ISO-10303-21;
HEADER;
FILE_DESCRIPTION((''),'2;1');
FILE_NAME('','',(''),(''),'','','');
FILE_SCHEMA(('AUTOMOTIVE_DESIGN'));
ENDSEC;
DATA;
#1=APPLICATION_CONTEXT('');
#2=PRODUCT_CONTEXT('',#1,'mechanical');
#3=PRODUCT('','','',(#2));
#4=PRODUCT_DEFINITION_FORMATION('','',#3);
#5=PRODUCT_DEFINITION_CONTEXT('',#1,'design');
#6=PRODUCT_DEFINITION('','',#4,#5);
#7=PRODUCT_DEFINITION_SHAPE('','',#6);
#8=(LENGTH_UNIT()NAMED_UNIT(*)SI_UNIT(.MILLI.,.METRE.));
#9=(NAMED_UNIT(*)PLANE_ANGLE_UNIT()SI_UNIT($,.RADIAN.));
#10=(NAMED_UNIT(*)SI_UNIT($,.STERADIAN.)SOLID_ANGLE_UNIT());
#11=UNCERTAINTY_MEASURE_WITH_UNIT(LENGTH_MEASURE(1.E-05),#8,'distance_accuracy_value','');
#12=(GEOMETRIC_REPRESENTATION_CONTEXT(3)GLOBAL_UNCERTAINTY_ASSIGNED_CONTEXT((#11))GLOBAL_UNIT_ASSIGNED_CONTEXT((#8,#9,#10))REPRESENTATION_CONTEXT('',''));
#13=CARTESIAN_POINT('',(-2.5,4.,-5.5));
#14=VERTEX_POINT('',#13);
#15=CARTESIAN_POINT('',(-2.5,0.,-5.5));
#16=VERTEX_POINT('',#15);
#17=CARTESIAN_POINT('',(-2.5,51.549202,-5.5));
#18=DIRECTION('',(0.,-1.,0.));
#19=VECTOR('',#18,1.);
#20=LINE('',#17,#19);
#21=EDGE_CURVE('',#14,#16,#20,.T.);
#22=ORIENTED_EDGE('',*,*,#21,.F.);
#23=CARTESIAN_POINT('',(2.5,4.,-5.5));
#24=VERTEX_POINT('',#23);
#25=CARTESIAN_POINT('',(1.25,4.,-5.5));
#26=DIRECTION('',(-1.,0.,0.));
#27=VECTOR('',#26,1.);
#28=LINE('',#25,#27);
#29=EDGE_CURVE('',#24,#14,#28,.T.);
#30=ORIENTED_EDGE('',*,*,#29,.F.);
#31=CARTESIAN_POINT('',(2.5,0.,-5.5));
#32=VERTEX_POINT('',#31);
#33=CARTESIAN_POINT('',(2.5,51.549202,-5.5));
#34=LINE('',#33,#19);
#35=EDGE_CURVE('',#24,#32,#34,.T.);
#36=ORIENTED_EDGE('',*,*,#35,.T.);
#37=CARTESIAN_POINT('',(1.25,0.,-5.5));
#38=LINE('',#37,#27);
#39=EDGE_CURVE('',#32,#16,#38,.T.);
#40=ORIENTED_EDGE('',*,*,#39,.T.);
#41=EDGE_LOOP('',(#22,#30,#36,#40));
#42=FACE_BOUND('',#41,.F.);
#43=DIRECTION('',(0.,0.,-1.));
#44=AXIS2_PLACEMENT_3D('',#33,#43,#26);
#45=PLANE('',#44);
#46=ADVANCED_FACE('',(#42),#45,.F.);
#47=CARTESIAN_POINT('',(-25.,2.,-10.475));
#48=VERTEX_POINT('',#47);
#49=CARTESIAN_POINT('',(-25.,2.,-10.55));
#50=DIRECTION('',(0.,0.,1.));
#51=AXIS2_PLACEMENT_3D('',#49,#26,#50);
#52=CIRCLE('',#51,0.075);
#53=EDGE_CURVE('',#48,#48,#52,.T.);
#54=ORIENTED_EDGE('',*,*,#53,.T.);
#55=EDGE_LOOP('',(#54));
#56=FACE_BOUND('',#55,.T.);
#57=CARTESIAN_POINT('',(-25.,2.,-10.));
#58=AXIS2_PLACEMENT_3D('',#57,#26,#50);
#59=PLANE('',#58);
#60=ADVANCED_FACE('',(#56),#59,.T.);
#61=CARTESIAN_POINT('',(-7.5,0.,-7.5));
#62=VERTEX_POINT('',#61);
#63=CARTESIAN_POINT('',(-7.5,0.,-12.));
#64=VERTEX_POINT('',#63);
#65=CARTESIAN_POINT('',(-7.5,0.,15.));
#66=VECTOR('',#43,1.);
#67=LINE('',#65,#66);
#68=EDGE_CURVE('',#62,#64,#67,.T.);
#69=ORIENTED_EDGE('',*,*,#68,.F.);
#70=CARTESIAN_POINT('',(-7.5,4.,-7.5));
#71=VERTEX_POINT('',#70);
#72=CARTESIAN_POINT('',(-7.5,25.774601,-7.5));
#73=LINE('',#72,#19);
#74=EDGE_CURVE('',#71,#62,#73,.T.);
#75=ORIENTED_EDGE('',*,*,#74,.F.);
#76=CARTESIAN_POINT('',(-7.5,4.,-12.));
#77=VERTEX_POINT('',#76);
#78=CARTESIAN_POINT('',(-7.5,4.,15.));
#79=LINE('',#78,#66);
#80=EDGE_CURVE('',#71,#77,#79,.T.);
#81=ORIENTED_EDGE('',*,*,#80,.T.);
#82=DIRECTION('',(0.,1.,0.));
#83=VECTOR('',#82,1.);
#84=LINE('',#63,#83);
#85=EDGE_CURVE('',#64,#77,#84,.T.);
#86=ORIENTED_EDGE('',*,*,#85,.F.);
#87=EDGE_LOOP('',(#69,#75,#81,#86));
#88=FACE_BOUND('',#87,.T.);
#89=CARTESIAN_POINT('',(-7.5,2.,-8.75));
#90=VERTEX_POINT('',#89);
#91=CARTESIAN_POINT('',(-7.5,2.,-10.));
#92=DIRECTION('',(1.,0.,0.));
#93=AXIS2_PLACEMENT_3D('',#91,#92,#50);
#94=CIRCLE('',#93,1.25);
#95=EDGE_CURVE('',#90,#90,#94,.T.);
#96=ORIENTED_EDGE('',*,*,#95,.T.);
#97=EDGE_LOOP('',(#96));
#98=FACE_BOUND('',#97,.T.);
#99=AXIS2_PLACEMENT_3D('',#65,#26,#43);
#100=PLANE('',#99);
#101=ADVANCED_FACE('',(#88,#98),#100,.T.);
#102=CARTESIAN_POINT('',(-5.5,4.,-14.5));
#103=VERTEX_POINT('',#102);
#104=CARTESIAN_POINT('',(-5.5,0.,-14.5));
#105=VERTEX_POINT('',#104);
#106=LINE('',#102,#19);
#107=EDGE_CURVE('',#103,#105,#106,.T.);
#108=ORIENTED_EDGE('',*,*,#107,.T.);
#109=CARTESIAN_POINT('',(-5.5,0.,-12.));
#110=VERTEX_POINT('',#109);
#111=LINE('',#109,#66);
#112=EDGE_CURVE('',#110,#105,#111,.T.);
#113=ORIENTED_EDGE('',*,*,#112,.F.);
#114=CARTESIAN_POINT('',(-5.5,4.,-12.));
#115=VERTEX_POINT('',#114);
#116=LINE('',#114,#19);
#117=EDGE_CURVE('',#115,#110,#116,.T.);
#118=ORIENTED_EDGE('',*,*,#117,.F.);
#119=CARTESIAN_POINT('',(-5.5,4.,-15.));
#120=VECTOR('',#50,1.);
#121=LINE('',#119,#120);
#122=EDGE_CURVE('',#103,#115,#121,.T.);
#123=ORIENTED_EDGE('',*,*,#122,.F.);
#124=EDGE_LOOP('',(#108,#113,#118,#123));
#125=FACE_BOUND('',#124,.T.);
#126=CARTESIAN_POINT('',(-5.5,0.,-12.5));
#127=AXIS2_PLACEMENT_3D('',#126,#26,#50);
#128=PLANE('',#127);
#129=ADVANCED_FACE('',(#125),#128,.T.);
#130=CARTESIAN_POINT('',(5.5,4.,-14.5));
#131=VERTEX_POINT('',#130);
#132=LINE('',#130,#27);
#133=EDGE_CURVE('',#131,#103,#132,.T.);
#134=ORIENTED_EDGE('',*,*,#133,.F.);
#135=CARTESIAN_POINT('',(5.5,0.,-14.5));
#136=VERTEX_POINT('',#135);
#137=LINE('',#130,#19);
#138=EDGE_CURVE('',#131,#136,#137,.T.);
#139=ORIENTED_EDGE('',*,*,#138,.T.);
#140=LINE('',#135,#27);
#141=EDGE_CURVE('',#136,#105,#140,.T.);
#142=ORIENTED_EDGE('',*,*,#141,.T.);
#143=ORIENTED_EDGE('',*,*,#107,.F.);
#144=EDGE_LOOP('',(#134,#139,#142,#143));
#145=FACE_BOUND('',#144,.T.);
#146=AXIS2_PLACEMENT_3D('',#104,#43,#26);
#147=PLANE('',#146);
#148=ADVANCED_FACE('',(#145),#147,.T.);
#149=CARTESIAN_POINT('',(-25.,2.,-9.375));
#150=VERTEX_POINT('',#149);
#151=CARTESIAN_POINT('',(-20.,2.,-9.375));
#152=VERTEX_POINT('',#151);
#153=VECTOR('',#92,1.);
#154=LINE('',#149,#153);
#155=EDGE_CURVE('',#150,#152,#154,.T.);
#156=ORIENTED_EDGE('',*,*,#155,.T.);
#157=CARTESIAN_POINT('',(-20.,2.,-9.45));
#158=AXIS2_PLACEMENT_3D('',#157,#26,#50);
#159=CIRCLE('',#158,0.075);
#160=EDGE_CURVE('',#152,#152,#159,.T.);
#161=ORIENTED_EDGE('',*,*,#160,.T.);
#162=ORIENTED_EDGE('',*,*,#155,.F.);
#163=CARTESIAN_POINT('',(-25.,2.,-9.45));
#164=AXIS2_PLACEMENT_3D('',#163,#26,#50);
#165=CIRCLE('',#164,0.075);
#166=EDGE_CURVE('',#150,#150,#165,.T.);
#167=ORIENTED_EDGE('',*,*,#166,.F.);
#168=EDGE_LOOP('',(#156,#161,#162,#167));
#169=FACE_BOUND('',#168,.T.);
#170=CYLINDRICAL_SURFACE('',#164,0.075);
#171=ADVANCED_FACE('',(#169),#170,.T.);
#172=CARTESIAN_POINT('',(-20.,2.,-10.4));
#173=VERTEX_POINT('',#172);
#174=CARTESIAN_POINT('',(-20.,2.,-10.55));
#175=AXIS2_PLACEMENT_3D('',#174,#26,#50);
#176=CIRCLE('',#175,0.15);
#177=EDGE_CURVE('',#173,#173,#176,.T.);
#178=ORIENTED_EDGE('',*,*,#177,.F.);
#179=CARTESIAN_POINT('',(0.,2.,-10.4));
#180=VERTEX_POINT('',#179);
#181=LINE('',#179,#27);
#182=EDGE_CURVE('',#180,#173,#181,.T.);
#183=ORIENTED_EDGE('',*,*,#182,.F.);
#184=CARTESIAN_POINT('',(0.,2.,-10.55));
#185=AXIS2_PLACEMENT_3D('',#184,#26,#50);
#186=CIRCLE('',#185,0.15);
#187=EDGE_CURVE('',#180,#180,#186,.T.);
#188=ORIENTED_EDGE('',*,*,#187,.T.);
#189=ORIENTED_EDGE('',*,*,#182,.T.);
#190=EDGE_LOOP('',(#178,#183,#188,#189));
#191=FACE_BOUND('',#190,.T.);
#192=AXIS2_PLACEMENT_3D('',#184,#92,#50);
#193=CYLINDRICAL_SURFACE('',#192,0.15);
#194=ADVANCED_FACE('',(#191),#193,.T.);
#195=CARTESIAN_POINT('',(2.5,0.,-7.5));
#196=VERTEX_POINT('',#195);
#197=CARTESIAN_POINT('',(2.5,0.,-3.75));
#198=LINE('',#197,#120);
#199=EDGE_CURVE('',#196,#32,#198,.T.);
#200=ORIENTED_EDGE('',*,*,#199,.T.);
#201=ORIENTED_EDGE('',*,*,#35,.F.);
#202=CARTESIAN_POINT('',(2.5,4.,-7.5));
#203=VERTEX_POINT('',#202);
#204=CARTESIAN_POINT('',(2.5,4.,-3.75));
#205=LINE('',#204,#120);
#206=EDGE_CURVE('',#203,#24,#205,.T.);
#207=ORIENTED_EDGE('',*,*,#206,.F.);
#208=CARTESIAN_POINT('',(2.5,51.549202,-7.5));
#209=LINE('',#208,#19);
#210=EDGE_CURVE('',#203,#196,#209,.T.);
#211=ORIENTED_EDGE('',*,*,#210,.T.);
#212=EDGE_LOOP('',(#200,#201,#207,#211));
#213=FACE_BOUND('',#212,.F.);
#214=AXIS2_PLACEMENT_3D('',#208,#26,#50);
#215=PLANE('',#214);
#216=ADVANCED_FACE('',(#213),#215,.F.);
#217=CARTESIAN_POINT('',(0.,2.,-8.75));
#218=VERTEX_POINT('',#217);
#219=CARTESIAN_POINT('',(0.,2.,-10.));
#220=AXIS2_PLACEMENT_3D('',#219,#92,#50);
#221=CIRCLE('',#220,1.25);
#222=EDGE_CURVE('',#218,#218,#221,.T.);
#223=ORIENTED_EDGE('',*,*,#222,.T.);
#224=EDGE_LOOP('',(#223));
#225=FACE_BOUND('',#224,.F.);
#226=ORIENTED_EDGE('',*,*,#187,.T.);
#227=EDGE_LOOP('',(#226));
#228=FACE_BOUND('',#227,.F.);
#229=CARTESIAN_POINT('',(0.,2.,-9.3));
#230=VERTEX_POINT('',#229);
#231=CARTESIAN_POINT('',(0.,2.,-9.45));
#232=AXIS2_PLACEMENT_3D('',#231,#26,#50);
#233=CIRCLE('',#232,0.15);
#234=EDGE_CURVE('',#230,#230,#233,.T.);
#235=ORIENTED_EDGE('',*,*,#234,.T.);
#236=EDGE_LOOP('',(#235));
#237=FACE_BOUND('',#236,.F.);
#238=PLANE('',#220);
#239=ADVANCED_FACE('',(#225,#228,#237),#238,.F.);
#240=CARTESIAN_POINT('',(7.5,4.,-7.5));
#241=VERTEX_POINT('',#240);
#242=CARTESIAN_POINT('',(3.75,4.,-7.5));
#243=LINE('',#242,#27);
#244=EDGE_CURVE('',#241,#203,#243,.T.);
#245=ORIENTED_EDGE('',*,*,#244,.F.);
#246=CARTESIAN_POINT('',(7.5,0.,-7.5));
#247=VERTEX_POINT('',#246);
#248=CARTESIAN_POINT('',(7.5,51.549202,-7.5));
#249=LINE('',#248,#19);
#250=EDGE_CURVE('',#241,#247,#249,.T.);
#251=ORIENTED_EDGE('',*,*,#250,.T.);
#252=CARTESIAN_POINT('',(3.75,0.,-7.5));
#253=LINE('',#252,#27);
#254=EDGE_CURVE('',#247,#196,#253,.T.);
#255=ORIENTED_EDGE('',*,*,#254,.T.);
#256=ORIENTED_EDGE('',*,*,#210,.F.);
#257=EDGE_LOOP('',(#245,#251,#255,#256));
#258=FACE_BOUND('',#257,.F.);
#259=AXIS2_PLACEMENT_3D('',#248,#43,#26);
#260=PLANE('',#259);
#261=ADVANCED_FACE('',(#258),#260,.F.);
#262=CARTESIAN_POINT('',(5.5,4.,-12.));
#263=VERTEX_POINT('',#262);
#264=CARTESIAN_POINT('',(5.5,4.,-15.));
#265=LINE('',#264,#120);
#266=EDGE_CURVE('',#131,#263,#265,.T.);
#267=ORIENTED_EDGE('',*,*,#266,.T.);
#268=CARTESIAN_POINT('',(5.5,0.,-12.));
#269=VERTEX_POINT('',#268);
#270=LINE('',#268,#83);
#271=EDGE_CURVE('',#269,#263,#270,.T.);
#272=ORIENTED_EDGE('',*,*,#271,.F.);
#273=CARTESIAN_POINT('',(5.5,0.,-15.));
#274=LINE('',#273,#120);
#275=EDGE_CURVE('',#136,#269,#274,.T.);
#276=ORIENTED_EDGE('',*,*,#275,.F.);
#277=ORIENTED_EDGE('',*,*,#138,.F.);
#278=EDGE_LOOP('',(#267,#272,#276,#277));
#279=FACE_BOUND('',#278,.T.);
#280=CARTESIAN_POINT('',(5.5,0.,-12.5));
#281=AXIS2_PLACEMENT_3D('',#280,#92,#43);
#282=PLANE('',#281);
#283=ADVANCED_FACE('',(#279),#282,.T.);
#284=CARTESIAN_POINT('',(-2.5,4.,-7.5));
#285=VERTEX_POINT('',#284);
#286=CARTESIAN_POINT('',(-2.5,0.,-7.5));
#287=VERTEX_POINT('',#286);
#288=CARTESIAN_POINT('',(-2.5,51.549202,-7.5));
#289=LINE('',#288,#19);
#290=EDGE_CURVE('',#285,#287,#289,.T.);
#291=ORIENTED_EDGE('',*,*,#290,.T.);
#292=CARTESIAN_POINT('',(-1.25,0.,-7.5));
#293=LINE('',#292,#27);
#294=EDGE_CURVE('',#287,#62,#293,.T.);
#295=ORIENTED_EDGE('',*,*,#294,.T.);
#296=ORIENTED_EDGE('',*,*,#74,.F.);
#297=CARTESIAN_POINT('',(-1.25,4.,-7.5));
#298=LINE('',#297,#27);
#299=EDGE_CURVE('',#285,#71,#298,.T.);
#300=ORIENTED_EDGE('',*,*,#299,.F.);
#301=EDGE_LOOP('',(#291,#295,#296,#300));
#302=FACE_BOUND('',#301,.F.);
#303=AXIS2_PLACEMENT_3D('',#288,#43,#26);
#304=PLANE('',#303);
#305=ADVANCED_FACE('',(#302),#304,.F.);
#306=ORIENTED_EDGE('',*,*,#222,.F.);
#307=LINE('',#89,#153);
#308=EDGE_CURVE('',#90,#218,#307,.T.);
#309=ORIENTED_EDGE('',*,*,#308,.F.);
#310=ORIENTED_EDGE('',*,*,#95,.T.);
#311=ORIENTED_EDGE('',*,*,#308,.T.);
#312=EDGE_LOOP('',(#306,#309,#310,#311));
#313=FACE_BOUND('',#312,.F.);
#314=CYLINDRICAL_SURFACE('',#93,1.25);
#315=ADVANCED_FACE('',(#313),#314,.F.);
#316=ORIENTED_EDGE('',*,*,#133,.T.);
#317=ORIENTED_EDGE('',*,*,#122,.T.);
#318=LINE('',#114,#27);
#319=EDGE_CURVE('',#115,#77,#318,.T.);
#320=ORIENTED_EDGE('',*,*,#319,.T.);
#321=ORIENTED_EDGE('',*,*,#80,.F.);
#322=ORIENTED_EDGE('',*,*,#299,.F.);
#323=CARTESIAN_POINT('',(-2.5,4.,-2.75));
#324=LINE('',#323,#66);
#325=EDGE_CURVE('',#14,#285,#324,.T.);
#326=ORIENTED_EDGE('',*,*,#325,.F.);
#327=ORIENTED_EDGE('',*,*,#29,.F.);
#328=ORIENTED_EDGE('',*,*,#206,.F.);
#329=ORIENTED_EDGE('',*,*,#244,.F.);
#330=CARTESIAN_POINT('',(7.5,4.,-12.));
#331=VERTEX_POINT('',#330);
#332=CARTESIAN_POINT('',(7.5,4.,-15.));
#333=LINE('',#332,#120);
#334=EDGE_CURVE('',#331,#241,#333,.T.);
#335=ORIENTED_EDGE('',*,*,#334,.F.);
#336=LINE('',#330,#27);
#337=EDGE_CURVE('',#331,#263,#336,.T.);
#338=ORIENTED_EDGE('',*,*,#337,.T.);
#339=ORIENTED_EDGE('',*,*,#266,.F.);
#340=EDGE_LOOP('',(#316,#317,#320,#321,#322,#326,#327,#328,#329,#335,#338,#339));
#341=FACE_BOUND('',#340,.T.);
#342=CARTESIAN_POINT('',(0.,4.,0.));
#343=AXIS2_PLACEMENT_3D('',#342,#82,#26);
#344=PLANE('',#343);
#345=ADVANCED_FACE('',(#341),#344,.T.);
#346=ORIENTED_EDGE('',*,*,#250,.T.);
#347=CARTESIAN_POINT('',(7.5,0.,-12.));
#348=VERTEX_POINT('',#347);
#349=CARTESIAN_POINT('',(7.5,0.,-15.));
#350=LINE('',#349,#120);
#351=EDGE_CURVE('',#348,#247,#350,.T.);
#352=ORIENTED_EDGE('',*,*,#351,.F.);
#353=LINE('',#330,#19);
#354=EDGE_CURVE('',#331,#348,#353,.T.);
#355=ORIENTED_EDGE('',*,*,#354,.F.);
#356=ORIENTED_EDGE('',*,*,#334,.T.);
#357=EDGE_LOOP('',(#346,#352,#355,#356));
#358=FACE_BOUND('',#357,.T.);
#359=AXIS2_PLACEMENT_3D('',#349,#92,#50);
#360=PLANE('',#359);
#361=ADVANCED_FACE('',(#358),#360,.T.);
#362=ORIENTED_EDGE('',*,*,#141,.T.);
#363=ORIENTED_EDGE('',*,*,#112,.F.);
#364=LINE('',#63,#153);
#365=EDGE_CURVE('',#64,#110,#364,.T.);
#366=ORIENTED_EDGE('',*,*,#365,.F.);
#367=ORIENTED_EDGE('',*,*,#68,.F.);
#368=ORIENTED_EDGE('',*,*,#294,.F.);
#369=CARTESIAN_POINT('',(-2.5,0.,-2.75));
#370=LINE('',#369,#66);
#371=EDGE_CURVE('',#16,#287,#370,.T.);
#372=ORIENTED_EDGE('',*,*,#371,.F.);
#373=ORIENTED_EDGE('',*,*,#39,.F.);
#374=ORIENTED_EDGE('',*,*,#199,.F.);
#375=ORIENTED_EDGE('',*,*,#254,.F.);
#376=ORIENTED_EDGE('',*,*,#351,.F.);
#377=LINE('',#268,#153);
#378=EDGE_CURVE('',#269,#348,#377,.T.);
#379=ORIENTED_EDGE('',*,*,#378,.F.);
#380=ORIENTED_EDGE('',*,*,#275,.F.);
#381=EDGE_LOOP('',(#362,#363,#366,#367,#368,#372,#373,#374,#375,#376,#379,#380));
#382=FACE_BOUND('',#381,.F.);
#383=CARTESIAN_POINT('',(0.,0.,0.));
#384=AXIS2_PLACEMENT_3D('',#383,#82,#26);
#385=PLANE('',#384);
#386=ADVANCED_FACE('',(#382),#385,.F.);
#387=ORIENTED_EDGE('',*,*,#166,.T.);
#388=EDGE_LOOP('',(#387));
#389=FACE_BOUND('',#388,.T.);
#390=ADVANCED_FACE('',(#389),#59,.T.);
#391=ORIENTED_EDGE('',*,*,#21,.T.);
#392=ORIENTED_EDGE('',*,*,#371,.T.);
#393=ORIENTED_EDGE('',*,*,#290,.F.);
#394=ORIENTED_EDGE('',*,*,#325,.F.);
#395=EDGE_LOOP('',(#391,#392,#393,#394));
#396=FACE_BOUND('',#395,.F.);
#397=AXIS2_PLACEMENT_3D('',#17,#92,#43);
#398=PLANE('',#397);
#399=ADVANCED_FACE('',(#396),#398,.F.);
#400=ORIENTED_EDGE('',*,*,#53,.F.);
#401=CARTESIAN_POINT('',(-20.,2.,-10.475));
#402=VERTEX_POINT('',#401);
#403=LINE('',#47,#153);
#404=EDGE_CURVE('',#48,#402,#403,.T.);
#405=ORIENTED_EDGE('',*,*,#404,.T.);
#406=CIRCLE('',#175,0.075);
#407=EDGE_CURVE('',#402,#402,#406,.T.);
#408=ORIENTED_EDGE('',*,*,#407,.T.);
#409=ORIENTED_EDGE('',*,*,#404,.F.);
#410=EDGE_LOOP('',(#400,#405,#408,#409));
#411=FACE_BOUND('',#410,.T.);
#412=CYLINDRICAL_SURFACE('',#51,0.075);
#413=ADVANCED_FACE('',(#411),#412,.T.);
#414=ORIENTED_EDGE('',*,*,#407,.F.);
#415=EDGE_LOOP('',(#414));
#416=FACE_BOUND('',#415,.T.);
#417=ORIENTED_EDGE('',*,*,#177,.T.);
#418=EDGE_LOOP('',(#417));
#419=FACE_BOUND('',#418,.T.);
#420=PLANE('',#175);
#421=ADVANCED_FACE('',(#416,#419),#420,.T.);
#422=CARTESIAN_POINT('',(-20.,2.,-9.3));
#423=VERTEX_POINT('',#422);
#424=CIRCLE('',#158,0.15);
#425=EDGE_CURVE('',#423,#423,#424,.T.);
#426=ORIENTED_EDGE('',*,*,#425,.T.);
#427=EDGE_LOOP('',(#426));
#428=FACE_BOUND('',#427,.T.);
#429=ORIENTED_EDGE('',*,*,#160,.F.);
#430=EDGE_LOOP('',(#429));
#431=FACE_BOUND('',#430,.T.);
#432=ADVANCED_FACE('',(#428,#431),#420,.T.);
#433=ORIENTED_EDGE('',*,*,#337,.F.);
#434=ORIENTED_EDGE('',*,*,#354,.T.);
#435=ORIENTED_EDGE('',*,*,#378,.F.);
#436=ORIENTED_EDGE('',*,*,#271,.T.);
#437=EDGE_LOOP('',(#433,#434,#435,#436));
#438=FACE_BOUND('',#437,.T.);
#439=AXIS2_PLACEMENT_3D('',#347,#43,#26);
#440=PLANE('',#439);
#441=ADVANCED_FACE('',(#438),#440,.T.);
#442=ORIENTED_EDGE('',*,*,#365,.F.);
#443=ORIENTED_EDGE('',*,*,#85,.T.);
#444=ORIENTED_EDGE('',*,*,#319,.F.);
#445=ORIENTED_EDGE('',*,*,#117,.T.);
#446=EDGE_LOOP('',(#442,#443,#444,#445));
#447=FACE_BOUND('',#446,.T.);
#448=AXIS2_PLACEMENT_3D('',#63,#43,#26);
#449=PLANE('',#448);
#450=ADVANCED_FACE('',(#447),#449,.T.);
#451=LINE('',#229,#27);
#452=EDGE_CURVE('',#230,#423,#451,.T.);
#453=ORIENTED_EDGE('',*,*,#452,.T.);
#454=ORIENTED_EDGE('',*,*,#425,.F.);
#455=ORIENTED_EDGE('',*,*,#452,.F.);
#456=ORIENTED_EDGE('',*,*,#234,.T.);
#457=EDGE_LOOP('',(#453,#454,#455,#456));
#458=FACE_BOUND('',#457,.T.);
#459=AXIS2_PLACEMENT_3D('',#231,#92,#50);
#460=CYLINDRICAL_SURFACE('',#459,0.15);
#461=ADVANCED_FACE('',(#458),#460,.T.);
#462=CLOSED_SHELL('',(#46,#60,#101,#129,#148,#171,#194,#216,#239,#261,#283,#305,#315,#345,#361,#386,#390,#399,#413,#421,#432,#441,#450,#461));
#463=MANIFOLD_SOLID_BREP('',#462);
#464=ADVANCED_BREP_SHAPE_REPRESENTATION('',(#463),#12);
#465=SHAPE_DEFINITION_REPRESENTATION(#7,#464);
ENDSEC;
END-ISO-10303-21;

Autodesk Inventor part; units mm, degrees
ref_plane "YZ Plane" through (0, 0, 0) normal (1, 0, 0) x (0, 1, 0)
ref_plane "XZ Plane" through (0, 0, 0) normal (0, 1, 0) x (-1, 0, 0)
ref_plane "XY Plane" through (0, 0, 0) normal (0, 0, 1) x (1, 0, 0)
sketch "Sketch1" plane through (0, 0, 0) normal (0, 1, 0) x (-1, 0, 0)
  line L0 (-7.5, 15) -> (7.5, 15)
  line L1 (7.5, 15) -> (7.5, -15)
  line L2 (7.5, -15) -> (-7.5, -15)
  line L3 (-7.5, -15) -> (-7.5, 15)
  line L4 (-7.5, 15) -> (7.5, -15) construction
  line L5 (7.5, 15) -> (-7.5, -15) construction
  point P0 (0, 0)
  dimension "d0" = 15
  dimension "d1" = 30
extrude "Extrusion1" add sketch "Sketch1" along normal blind 4
chamfer "Chamfer1" distance 2.5 distance2 1 1 edges at (7.5, 2, -15) measured on face at (7.5, 1.3333, 5)
chamfer "Chamfer2" distance 1 distance2 2.5 1 edges at (-7.5, 2, -15) measured on face at (1.8333, 2.6667, -15)
sketch "Sketch3" plane through (0, 0, 0) normal (0, -1, 0) x (1, 0, 0)
  line L0 (0, 0) -> (4, 0)
  line L1 (0, 0) -> (-4, 0)
  dimension "d14" = 4
  dimension "d15" = 4
hole "Hole1" at (4, 0, 0) at (-4, 0, 0) direction (0, 1, 0) diameter 2.1565 end through all thread size "4-40 UNC" class "2B" standard "ANSI Unified Screw Threads"
sketch "Sketch4" plane through (0, 0, 0) normal (0, -1, 0) x (1, 0, 0)
  line L0 (7.5, 15) -> (7.5, -12.5) projected
  line L1 (7.5, -12.5) -> (7.5, -7.5)
  line L2 (7.5, -7.5) -> (2.5, -7.5)
  line L3 (2.5, -7.5) -> (2.5, -5.5)
  line L4 (2.5, -5.5) -> (-2.5, -5.5)
  line L5 (-2.5, -5.5) -> (-2.5, -7.5)
  line L6 (-2.5, -7.5) -> (-7.5679, -7.5)
  line L7 (-7.5679, -7.5) -> (-7.5679, -12.5)
  line L8 (6.5, -15) -> (-6.5, -15) projected
  line L9 (-7.5679, -12.5) -> (-6.5, -15)
  line L10 (7.5, -12.5) -> (6.5, -15) projected
  line L11 (-6.5, -15) -> (6.5, -15)
  line L12 (6.5, -15) -> (7.5, -12.5)
  point P0 (0, 0)
  dimension "d23" = 5
  dimension "d24" = 5
  dimension "d25" = 2
  dimension "d26" = 5
split body "Split1" sketch "Sketch4" result one side removed curves L2 L3 L4 L5 L6 L7 L9 L11 L12 L1 removed pieces at (1.1663, 0.5, 10.3182)
sketch "Sketch5" plane through (-7.5, 0, -12.5) normal (-1, 0, 0) x (0, 0, 1)
  line L0 (0, 0) -> (0, 4) projected
  line L1 (-2.5, 4) -> (-2.5, 0) projected
  line L2 (0, 0) -> (-2.5, 0)
  line L3 (-2.5, 0) -> (-2.5, 4)
  line L4 (-2.5, 4) -> (0, 4)
  line L5 (0, 4) -> (0, 0)
  point P0 (12.5, 0)
extrude "Extrusion3" cut sketch "Sketch5" against normal blind 2
sketch "Sketch6" plane through (7.5, 0, -12.5) normal (1, 0, 0) x (0, 0, -1)
  line L0 (0, 4) -> (0, 0) projected
  line L1 (2.5, 0) -> (2.5, 4) projected
  line L2 (0, 4) -> (2.5, 4)
  line L3 (2.5, 4) -> (2.5, 0)
  line L4 (2.5, 0) -> (0, 0)
  line L5 (0, 0) -> (0, 4)
  point P0 (-12.5, 0)
extrude "Extrusion4" cut sketch "Sketch6" against normal blind 2
hole "Hole2" at (-7.5, 2, -10) direction (1, 0, 0) diameter 2.5 depth 7.5
sketch "Sketch7" plane through (-7.5, 0, -12.5) normal (0, 0, -1) x (-1, 0, 0)
  line L0 (0, 0) -> (0, 4) projected
  line L1 (-2, 4) -> (0, 4) projected
  line L2 (-2, 4) -> (-2, 0) projected
  line L3 (0, 0) -> (-2, 0) projected
  point P0 (-7.5, 0)
extrude "Extrusion5" cut sketch "Sketch7" against normal blind 0.5
sketch "Sketch8" plane through (7.5, 0, -12.5) normal (0, 0, -1) x (-1, 0, 0)
  line L0 (2, 0) -> (0, 0) projected
  line L1 (0, 4) -> (0, 0) projected
  line L2 (2, 0) -> (0, 0) projected
  line L3 (2, 0) -> (2, 4) projected
  line L4 (0, 4) -> (2, 4) projected
  point P0 (7.5, 0)
extrude "Extrusion6" cut sketch "Sketch8" against normal blind 0.5
sketch "Sketch9" plane through (-5.5, 0, -12.5) normal (-1, 0, 0) x (0, 0, 1)
  line L0 (-2.5, 0) -> (-2.5, 4) projected
  line L1 (-2.5, 2) -> (-1.013, 2)
  point P0 (12.5, 0)
  dimension "d44" = 1.487
hole "Hole3" [suppressed]
sketch "Sketch10" plane through (5.5, 0, -12.5) normal (1, 0, 0) x (0, 0, -1)
  circle A0 centre (1.013, 2) radius 0.5953 projected
  point P0 (-12.5, 0)
hole "Hole4" [suppressed]
sketch "Sketch11" plane through (-5.5, 0, -15) normal (0, 0, -1) x (-1, 0, 0)
  line L0 (-11, 4) -> (-11, 0) projected
  line L1 (-11, 0) -> (0, 0) projected
  line L2 (-11, 4) -> (0, 4)
  line L3 (0, 4) -> (0, 0)
  line L4 (0, 0) -> (-11, 0)
  line L5 (-11, 0) -> (-11, 4)
  point P0 (-5.5, 0)
extrude "Extrusion7" cut sketch "Sketch11" against normal blind 0.5
sketch "Sketch12" plane through (0, 2, -10) normal (-1, 0, 0) x (0, 0, 1)
  circle A0 centre (-0.55, 0) radius 0.15
  circle A1 centre (0.55, 0) radius 0.15
  point P0 (10, -2)
  dimension "d63" = 0.3
  dimension "d64" = 0.3
extrude "Extrusion8" add sketch "Sketch12" along normal blind 25
sketch "Sketch13" plane through (-25, 2, -10.55) normal (-1, 0, 0) x (0, 0, 1)
  circle A0 centre (0, 0) radius 0.15 projected
  circle A1 centre (0, 0) radius 0.075
  circle A2 centre (1.1, 0) radius 0.15 projected
  circle A3 centre (1.1, 0) radius 0.075
  circle A4 centre (0, 0) radius 0.15 projected
  circle A5 centre (1.1, 0) radius 0.15 projected
  point P0 (10.55, -2)
  dimension "d67" = 0.15
  dimension "d68" = 0.15
extrude "Extrusion9" cut sketch "Sketch13" against normal blind 5
properties part number "AlN_thermal_contact" material "Copper"
